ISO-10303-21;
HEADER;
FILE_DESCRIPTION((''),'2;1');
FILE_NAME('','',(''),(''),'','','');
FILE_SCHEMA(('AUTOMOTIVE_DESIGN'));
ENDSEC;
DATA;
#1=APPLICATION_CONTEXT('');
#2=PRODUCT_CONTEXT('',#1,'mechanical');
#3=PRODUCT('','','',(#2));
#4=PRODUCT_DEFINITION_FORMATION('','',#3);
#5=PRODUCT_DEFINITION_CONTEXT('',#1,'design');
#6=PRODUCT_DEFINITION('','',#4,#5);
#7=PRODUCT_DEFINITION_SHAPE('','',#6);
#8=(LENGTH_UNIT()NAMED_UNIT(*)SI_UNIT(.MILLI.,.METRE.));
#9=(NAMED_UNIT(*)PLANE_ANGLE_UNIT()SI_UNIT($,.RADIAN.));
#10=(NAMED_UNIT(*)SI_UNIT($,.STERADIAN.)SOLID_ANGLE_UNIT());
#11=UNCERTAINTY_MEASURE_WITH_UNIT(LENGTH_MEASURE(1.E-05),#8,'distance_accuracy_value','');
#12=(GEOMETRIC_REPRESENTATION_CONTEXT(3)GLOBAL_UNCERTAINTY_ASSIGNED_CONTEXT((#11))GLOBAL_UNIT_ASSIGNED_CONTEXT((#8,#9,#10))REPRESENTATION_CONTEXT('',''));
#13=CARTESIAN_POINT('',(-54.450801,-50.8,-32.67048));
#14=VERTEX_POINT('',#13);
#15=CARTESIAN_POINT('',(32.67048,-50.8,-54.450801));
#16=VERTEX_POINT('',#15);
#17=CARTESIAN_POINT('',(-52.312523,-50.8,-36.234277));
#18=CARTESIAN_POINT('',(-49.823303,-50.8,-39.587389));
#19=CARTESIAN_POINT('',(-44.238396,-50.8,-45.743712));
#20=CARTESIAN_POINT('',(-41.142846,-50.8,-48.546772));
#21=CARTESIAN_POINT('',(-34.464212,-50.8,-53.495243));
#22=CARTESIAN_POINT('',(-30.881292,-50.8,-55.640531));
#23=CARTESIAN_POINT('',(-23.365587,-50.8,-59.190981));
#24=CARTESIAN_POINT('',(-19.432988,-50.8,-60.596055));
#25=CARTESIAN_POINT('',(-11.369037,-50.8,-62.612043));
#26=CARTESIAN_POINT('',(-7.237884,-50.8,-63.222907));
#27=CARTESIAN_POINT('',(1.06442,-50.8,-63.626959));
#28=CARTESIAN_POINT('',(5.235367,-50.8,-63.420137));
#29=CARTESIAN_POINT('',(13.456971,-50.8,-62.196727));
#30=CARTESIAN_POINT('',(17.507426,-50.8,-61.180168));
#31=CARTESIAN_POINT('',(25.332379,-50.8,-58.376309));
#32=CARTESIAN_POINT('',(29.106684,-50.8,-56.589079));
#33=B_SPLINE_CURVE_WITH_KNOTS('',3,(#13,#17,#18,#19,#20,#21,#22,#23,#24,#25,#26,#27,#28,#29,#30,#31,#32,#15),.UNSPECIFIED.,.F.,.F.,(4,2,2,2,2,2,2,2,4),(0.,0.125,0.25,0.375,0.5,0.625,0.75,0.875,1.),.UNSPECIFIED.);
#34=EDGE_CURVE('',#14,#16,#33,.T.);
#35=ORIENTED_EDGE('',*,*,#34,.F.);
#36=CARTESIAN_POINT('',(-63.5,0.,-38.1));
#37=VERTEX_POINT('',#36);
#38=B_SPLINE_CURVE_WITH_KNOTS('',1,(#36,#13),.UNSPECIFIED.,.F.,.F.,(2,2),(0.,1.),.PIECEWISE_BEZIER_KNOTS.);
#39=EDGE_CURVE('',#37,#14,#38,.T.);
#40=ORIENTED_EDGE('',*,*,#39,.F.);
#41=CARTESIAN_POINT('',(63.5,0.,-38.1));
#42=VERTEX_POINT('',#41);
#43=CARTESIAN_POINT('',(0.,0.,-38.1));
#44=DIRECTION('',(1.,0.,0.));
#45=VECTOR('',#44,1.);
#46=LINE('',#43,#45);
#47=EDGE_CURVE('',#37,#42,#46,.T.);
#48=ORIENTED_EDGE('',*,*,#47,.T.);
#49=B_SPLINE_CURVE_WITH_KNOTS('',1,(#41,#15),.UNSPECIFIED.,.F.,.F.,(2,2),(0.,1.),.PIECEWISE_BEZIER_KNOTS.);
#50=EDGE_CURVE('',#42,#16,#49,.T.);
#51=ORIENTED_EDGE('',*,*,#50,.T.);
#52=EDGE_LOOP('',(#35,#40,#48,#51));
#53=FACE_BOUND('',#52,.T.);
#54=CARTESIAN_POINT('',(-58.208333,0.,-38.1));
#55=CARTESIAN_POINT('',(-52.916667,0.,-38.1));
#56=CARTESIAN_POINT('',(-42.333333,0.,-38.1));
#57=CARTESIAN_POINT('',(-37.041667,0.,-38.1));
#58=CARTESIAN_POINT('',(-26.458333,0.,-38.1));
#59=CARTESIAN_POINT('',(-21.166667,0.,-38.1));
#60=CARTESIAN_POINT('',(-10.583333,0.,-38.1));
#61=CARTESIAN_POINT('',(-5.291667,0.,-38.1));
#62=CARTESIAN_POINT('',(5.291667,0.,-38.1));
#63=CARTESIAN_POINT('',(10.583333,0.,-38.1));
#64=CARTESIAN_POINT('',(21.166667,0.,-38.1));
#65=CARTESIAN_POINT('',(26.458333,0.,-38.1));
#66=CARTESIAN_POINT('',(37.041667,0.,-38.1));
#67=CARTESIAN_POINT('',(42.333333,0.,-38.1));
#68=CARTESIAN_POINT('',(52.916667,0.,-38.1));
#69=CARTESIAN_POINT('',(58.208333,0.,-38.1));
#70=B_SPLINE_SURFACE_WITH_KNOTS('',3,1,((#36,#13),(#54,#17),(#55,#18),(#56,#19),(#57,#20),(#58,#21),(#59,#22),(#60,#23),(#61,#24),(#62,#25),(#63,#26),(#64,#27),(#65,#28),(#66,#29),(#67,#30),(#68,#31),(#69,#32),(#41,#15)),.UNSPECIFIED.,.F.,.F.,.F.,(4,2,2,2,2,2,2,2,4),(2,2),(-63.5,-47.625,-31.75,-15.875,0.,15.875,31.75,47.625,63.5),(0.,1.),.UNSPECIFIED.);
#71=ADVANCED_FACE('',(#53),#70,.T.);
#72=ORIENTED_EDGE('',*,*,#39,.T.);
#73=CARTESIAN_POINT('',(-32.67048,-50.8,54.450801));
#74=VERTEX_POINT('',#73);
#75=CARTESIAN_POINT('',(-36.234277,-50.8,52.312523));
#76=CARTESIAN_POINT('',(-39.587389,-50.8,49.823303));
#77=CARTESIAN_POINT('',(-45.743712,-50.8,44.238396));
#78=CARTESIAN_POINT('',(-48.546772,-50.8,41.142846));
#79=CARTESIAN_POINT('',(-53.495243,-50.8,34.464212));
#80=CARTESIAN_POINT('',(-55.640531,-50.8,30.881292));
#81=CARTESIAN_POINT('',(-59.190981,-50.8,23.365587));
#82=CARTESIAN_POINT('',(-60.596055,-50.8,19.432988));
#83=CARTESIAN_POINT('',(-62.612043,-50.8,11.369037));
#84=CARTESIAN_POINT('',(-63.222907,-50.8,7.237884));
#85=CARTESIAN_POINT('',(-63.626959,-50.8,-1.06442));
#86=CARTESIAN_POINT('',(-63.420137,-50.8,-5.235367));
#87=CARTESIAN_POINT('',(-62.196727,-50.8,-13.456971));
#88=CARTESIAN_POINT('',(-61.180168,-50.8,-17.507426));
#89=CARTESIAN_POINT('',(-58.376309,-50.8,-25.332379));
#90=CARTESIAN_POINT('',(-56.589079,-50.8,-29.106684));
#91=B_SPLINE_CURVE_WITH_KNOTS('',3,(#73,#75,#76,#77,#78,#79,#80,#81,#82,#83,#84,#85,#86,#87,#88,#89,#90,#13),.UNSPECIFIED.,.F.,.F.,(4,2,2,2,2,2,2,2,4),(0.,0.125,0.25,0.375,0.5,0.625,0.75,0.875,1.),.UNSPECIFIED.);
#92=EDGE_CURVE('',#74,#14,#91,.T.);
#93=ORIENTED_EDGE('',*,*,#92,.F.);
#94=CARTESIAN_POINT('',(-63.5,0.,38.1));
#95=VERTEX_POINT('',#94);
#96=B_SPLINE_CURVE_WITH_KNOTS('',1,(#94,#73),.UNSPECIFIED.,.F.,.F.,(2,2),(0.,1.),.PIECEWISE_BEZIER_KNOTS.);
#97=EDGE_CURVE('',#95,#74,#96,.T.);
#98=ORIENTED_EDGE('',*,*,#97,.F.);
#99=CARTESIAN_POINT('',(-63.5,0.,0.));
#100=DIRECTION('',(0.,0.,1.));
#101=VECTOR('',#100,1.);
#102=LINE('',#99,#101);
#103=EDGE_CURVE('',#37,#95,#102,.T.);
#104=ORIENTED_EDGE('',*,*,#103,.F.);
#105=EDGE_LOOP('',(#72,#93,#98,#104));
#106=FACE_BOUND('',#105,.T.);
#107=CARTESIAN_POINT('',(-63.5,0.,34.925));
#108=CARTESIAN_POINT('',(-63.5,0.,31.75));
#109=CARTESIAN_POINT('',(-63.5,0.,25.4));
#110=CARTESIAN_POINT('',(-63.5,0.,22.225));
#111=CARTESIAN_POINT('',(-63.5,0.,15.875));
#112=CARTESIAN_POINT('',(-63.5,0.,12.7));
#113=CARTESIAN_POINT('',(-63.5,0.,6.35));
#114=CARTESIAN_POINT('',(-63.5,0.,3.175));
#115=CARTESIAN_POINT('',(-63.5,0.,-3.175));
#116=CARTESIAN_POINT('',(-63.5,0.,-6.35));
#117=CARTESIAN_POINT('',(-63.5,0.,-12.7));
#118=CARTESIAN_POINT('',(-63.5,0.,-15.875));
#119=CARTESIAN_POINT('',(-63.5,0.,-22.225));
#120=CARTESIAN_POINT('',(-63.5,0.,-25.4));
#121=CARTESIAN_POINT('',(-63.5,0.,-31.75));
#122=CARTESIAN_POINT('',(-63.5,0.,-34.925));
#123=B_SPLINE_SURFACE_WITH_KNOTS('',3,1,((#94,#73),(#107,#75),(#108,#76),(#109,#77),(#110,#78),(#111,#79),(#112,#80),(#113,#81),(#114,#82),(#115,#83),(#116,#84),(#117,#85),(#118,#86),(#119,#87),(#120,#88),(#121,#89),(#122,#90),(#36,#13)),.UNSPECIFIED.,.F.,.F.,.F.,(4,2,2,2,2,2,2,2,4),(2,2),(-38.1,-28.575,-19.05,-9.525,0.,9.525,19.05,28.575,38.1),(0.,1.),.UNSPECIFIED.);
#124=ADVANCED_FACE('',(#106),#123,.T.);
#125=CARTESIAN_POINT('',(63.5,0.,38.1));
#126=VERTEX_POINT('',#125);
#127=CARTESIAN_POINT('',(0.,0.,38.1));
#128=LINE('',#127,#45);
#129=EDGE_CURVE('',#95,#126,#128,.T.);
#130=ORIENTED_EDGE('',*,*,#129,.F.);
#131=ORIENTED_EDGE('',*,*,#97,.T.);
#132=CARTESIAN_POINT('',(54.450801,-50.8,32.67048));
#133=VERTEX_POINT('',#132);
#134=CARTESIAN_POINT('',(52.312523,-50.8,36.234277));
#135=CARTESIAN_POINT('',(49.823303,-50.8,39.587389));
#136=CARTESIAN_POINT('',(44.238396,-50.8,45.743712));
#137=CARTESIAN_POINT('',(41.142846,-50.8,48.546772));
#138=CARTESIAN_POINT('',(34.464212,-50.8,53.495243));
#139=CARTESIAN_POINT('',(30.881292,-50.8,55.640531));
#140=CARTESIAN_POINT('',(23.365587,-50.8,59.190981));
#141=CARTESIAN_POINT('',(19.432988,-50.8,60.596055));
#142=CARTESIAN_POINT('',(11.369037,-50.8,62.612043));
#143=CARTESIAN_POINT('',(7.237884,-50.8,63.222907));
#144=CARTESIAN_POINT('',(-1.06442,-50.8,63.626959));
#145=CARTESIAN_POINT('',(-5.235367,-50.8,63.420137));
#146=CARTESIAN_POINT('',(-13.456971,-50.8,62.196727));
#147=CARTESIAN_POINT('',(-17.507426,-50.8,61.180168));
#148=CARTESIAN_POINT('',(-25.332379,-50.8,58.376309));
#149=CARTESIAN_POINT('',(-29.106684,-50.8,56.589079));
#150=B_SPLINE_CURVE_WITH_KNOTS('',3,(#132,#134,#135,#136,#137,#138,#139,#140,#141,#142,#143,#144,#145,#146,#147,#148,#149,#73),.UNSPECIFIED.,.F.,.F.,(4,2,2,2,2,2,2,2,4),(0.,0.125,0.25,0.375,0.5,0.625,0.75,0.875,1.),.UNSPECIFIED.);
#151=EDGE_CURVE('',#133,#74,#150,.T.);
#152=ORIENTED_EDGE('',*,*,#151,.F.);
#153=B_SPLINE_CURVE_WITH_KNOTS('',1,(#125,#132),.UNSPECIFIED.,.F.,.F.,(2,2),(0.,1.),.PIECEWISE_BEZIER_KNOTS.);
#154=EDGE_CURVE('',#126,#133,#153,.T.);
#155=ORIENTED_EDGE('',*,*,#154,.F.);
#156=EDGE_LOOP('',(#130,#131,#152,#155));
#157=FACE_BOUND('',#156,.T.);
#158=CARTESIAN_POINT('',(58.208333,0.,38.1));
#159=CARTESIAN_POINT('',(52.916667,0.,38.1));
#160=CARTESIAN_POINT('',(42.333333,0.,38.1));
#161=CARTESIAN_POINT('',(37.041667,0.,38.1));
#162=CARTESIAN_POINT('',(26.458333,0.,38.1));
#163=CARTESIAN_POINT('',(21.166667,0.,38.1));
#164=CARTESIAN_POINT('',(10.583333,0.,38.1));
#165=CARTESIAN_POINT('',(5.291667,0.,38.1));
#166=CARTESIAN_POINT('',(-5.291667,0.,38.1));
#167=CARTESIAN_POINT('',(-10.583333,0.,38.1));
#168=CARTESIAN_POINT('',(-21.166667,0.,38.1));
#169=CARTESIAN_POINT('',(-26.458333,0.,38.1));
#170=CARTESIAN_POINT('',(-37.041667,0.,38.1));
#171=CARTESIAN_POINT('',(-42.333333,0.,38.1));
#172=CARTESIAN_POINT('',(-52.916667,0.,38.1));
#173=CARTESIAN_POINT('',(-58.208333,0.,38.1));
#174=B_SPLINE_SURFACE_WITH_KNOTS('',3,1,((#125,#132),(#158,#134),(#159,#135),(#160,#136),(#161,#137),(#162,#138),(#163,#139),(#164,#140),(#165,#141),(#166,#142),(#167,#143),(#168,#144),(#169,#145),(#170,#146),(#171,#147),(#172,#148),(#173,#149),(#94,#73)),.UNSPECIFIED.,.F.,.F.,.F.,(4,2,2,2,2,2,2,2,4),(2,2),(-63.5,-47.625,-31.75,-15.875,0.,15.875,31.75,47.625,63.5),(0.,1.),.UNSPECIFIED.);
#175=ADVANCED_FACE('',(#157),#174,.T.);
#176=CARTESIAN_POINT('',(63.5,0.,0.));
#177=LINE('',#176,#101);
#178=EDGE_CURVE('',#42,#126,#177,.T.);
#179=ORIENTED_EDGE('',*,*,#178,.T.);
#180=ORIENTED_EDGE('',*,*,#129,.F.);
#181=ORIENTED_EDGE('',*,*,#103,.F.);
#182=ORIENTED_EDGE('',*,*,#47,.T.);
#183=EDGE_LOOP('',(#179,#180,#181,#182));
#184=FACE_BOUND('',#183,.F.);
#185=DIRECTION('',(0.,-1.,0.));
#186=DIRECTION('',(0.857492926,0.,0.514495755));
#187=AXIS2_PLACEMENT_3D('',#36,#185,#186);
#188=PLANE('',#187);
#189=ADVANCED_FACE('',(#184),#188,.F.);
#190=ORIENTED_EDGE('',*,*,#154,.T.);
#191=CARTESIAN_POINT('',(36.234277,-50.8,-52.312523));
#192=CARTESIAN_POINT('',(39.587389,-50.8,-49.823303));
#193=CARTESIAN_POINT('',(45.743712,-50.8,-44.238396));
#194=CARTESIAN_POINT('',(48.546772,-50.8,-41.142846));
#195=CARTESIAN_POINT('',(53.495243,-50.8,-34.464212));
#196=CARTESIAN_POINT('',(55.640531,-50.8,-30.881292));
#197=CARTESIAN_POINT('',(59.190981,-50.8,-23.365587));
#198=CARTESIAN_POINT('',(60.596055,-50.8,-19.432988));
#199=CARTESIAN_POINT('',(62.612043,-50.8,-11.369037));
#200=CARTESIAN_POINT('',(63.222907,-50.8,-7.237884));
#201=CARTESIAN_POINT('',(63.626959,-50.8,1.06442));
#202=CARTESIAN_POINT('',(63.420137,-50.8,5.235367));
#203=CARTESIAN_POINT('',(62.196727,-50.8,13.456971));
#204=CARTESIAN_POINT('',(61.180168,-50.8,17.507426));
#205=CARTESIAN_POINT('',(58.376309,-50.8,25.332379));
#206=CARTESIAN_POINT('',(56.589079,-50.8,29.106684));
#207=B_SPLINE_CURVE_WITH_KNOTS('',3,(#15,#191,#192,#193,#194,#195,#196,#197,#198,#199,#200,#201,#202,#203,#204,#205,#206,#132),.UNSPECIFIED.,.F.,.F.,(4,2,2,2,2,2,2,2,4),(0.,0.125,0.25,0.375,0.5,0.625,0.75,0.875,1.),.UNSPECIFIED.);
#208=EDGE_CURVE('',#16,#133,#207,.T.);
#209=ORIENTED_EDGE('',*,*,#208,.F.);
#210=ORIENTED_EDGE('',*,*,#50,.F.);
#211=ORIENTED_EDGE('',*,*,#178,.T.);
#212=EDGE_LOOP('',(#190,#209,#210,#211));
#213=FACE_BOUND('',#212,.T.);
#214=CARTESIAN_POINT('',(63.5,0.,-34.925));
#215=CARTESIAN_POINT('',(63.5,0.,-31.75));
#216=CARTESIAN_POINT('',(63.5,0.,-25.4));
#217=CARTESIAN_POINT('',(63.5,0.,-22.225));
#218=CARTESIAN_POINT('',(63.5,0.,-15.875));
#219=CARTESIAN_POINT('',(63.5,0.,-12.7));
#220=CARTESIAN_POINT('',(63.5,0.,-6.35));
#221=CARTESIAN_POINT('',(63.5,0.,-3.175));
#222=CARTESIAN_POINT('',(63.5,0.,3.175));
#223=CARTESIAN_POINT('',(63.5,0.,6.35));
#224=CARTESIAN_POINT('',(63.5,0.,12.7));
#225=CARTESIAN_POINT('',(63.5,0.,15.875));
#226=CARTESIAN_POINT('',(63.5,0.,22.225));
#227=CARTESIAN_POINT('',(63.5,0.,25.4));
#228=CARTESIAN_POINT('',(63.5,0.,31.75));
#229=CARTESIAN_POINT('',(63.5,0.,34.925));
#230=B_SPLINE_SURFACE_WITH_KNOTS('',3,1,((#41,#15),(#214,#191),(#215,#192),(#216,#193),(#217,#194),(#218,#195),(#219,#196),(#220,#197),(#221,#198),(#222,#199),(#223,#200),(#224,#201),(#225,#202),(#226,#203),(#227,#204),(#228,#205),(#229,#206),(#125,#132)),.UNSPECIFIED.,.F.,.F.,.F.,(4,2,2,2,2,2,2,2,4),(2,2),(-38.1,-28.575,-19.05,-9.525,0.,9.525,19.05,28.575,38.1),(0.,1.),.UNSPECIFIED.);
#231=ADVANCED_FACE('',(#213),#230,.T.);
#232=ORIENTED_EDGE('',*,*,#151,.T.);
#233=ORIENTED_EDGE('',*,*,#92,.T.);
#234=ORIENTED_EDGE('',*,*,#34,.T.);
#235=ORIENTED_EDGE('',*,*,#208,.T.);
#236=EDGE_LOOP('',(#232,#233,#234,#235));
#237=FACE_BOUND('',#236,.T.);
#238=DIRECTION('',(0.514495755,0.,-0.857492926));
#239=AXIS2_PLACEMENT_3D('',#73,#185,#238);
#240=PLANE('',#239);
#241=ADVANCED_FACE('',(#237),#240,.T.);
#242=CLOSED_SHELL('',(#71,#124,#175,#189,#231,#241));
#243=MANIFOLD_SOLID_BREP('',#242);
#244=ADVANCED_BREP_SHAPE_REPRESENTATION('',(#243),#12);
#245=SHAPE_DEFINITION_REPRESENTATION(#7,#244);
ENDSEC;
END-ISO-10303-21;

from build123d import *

# Parameters (mm, degrees)
F0_W = 127
F0_H = 76.2


# Not quite as in the source:
# - the arcs of a loft's sections are written as splines that run evenly, so that the points pair up as in the source's solid


with BuildPart() as f3:
    # F0 (on Front) → F3 section 0
    with BuildSketch(Plane.XZ):
        Rectangle(F0_W, F0_H)
    # F2 (on offset) → F3 section 1
    with BuildSketch(Plane.XZ.offset(50.8)):
        with BuildLine():
            add(Edge.make_bspline(
                [(54.4508007827, 32.6704804696), (52.3125228362, 36.2342770472), (49.8233031159, 39.5873887146), (44.2383956014, 45.7437124995), (41.142845905, 48.5467723897), (34.4642116327, 53.4952427339), (30.8812921992, 55.6405308272), (23.3655873388, 59.1909807904), (19.4329877526, 60.5960548685), (11.369036627, 62.6120426499), (7.2378844848, 63.222906504), (-1.0644197865, 63.6269588236), (-5.2353666247, 63.4201372982), (-13.4569711446, 62.1967266521), (-17.5074255309, 61.1801677826), (-25.3323786483, 58.3763091557), (-29.1066838921, 56.5890787293), (-32.6704804696, 54.4508007827)],
                knots=[0, 0, 0, 0, 0.125, 0.125, 0.25, 0.25, 0.375, 0.375, 0.5, 0.5, 0.625, 0.625, 0.75, 0.75, 0.875, 0.875, 1, 1, 1, 1], degree=3))
            add(Edge.make_bspline(
                [(-32.6704804696, 54.4508007827), (-36.2342770472, 52.3125228362), (-39.5873887146, 49.8233031159), (-45.7437124995, 44.2383956014), (-48.5467723897, 41.142845905), (-53.4952427339, 34.4642116327), (-55.6405308272, 30.8812921992), (-59.1909807904, 23.3655873388), (-60.5960548685, 19.4329877526), (-62.6120426499, 11.369036627), (-63.222906504, 7.2378844848), (-63.6269588236, -1.0644197865), (-63.4201372982, -5.2353666247), (-62.1967266521, -13.4569711446), (-61.1801677826, -17.5074255309), (-58.3763091557, -25.3323786483), (-56.5890787293, -29.1066838921), (-54.4508007827, -32.6704804696)],
                knots=[0, 0, 0, 0, 0.125, 0.125, 0.25, 0.25, 0.375, 0.375, 0.5, 0.5, 0.625, 0.625, 0.75, 0.75, 0.875, 0.875, 1, 1, 1, 1], degree=3))
            add(Edge.make_bspline(
                [(-54.4508007827, -32.6704804696), (-52.3125228362, -36.2342770472), (-49.8233031159, -39.5873887146), (-44.2383956014, -45.7437124995), (-41.142845905, -48.5467723897), (-34.4642116327, -53.4952427339), (-30.8812921992, -55.6405308272), (-23.3655873388, -59.1909807904), (-19.4329877526, -60.5960548685), (-11.369036627, -62.6120426499), (-7.2378844848, -63.222906504), (1.0644197865, -63.6269588236), (5.2353666247, -63.4201372982), (13.4569711446, -62.1967266521), (17.5074255309, -61.1801677826), (25.3323786483, -58.3763091557), (29.1066838921, -56.5890787293), (32.6704804696, -54.4508007827)],
                knots=[0, 0, 0, 0, 0.125, 0.125, 0.25, 0.25, 0.375, 0.375, 0.5, 0.5, 0.625, 0.625, 0.75, 0.75, 0.875, 0.875, 1, 1, 1, 1], degree=3))
            add(Edge.make_bspline(
                [(32.6704804696, -54.4508007827), (36.2342770472, -52.3125228362), (39.5873887146, -49.8233031159), (45.7437124995, -44.2383956014), (48.5467723897, -41.142845905), (53.4952427339, -34.4642116327), (55.6405308272, -30.8812921992), (59.1909807904, -23.3655873388), (60.5960548685, -19.4329877526), (62.6120426499, -11.369036627), (63.222906504, -7.2378844848), (63.6269588236, 1.0644197865), (63.4201372982, 5.2353666247), (62.1967266521, 13.4569711446), (61.1801677826, 17.5074255309), (58.3763091557, 25.3323786483), (56.5890787293, 29.1066838921), (54.4508007827, 32.6704804696)],
                knots=[0, 0, 0, 0, 0.125, 0.125, 0.25, 0.25, 0.375, 0.375, 0.5, 0.5, 0.625, 0.625, 0.75, 0.75, 0.875, 0.875, 1, 1, 1, 1], degree=3))
        make_face()
    loft(ruled=True)


solid = f3.part
